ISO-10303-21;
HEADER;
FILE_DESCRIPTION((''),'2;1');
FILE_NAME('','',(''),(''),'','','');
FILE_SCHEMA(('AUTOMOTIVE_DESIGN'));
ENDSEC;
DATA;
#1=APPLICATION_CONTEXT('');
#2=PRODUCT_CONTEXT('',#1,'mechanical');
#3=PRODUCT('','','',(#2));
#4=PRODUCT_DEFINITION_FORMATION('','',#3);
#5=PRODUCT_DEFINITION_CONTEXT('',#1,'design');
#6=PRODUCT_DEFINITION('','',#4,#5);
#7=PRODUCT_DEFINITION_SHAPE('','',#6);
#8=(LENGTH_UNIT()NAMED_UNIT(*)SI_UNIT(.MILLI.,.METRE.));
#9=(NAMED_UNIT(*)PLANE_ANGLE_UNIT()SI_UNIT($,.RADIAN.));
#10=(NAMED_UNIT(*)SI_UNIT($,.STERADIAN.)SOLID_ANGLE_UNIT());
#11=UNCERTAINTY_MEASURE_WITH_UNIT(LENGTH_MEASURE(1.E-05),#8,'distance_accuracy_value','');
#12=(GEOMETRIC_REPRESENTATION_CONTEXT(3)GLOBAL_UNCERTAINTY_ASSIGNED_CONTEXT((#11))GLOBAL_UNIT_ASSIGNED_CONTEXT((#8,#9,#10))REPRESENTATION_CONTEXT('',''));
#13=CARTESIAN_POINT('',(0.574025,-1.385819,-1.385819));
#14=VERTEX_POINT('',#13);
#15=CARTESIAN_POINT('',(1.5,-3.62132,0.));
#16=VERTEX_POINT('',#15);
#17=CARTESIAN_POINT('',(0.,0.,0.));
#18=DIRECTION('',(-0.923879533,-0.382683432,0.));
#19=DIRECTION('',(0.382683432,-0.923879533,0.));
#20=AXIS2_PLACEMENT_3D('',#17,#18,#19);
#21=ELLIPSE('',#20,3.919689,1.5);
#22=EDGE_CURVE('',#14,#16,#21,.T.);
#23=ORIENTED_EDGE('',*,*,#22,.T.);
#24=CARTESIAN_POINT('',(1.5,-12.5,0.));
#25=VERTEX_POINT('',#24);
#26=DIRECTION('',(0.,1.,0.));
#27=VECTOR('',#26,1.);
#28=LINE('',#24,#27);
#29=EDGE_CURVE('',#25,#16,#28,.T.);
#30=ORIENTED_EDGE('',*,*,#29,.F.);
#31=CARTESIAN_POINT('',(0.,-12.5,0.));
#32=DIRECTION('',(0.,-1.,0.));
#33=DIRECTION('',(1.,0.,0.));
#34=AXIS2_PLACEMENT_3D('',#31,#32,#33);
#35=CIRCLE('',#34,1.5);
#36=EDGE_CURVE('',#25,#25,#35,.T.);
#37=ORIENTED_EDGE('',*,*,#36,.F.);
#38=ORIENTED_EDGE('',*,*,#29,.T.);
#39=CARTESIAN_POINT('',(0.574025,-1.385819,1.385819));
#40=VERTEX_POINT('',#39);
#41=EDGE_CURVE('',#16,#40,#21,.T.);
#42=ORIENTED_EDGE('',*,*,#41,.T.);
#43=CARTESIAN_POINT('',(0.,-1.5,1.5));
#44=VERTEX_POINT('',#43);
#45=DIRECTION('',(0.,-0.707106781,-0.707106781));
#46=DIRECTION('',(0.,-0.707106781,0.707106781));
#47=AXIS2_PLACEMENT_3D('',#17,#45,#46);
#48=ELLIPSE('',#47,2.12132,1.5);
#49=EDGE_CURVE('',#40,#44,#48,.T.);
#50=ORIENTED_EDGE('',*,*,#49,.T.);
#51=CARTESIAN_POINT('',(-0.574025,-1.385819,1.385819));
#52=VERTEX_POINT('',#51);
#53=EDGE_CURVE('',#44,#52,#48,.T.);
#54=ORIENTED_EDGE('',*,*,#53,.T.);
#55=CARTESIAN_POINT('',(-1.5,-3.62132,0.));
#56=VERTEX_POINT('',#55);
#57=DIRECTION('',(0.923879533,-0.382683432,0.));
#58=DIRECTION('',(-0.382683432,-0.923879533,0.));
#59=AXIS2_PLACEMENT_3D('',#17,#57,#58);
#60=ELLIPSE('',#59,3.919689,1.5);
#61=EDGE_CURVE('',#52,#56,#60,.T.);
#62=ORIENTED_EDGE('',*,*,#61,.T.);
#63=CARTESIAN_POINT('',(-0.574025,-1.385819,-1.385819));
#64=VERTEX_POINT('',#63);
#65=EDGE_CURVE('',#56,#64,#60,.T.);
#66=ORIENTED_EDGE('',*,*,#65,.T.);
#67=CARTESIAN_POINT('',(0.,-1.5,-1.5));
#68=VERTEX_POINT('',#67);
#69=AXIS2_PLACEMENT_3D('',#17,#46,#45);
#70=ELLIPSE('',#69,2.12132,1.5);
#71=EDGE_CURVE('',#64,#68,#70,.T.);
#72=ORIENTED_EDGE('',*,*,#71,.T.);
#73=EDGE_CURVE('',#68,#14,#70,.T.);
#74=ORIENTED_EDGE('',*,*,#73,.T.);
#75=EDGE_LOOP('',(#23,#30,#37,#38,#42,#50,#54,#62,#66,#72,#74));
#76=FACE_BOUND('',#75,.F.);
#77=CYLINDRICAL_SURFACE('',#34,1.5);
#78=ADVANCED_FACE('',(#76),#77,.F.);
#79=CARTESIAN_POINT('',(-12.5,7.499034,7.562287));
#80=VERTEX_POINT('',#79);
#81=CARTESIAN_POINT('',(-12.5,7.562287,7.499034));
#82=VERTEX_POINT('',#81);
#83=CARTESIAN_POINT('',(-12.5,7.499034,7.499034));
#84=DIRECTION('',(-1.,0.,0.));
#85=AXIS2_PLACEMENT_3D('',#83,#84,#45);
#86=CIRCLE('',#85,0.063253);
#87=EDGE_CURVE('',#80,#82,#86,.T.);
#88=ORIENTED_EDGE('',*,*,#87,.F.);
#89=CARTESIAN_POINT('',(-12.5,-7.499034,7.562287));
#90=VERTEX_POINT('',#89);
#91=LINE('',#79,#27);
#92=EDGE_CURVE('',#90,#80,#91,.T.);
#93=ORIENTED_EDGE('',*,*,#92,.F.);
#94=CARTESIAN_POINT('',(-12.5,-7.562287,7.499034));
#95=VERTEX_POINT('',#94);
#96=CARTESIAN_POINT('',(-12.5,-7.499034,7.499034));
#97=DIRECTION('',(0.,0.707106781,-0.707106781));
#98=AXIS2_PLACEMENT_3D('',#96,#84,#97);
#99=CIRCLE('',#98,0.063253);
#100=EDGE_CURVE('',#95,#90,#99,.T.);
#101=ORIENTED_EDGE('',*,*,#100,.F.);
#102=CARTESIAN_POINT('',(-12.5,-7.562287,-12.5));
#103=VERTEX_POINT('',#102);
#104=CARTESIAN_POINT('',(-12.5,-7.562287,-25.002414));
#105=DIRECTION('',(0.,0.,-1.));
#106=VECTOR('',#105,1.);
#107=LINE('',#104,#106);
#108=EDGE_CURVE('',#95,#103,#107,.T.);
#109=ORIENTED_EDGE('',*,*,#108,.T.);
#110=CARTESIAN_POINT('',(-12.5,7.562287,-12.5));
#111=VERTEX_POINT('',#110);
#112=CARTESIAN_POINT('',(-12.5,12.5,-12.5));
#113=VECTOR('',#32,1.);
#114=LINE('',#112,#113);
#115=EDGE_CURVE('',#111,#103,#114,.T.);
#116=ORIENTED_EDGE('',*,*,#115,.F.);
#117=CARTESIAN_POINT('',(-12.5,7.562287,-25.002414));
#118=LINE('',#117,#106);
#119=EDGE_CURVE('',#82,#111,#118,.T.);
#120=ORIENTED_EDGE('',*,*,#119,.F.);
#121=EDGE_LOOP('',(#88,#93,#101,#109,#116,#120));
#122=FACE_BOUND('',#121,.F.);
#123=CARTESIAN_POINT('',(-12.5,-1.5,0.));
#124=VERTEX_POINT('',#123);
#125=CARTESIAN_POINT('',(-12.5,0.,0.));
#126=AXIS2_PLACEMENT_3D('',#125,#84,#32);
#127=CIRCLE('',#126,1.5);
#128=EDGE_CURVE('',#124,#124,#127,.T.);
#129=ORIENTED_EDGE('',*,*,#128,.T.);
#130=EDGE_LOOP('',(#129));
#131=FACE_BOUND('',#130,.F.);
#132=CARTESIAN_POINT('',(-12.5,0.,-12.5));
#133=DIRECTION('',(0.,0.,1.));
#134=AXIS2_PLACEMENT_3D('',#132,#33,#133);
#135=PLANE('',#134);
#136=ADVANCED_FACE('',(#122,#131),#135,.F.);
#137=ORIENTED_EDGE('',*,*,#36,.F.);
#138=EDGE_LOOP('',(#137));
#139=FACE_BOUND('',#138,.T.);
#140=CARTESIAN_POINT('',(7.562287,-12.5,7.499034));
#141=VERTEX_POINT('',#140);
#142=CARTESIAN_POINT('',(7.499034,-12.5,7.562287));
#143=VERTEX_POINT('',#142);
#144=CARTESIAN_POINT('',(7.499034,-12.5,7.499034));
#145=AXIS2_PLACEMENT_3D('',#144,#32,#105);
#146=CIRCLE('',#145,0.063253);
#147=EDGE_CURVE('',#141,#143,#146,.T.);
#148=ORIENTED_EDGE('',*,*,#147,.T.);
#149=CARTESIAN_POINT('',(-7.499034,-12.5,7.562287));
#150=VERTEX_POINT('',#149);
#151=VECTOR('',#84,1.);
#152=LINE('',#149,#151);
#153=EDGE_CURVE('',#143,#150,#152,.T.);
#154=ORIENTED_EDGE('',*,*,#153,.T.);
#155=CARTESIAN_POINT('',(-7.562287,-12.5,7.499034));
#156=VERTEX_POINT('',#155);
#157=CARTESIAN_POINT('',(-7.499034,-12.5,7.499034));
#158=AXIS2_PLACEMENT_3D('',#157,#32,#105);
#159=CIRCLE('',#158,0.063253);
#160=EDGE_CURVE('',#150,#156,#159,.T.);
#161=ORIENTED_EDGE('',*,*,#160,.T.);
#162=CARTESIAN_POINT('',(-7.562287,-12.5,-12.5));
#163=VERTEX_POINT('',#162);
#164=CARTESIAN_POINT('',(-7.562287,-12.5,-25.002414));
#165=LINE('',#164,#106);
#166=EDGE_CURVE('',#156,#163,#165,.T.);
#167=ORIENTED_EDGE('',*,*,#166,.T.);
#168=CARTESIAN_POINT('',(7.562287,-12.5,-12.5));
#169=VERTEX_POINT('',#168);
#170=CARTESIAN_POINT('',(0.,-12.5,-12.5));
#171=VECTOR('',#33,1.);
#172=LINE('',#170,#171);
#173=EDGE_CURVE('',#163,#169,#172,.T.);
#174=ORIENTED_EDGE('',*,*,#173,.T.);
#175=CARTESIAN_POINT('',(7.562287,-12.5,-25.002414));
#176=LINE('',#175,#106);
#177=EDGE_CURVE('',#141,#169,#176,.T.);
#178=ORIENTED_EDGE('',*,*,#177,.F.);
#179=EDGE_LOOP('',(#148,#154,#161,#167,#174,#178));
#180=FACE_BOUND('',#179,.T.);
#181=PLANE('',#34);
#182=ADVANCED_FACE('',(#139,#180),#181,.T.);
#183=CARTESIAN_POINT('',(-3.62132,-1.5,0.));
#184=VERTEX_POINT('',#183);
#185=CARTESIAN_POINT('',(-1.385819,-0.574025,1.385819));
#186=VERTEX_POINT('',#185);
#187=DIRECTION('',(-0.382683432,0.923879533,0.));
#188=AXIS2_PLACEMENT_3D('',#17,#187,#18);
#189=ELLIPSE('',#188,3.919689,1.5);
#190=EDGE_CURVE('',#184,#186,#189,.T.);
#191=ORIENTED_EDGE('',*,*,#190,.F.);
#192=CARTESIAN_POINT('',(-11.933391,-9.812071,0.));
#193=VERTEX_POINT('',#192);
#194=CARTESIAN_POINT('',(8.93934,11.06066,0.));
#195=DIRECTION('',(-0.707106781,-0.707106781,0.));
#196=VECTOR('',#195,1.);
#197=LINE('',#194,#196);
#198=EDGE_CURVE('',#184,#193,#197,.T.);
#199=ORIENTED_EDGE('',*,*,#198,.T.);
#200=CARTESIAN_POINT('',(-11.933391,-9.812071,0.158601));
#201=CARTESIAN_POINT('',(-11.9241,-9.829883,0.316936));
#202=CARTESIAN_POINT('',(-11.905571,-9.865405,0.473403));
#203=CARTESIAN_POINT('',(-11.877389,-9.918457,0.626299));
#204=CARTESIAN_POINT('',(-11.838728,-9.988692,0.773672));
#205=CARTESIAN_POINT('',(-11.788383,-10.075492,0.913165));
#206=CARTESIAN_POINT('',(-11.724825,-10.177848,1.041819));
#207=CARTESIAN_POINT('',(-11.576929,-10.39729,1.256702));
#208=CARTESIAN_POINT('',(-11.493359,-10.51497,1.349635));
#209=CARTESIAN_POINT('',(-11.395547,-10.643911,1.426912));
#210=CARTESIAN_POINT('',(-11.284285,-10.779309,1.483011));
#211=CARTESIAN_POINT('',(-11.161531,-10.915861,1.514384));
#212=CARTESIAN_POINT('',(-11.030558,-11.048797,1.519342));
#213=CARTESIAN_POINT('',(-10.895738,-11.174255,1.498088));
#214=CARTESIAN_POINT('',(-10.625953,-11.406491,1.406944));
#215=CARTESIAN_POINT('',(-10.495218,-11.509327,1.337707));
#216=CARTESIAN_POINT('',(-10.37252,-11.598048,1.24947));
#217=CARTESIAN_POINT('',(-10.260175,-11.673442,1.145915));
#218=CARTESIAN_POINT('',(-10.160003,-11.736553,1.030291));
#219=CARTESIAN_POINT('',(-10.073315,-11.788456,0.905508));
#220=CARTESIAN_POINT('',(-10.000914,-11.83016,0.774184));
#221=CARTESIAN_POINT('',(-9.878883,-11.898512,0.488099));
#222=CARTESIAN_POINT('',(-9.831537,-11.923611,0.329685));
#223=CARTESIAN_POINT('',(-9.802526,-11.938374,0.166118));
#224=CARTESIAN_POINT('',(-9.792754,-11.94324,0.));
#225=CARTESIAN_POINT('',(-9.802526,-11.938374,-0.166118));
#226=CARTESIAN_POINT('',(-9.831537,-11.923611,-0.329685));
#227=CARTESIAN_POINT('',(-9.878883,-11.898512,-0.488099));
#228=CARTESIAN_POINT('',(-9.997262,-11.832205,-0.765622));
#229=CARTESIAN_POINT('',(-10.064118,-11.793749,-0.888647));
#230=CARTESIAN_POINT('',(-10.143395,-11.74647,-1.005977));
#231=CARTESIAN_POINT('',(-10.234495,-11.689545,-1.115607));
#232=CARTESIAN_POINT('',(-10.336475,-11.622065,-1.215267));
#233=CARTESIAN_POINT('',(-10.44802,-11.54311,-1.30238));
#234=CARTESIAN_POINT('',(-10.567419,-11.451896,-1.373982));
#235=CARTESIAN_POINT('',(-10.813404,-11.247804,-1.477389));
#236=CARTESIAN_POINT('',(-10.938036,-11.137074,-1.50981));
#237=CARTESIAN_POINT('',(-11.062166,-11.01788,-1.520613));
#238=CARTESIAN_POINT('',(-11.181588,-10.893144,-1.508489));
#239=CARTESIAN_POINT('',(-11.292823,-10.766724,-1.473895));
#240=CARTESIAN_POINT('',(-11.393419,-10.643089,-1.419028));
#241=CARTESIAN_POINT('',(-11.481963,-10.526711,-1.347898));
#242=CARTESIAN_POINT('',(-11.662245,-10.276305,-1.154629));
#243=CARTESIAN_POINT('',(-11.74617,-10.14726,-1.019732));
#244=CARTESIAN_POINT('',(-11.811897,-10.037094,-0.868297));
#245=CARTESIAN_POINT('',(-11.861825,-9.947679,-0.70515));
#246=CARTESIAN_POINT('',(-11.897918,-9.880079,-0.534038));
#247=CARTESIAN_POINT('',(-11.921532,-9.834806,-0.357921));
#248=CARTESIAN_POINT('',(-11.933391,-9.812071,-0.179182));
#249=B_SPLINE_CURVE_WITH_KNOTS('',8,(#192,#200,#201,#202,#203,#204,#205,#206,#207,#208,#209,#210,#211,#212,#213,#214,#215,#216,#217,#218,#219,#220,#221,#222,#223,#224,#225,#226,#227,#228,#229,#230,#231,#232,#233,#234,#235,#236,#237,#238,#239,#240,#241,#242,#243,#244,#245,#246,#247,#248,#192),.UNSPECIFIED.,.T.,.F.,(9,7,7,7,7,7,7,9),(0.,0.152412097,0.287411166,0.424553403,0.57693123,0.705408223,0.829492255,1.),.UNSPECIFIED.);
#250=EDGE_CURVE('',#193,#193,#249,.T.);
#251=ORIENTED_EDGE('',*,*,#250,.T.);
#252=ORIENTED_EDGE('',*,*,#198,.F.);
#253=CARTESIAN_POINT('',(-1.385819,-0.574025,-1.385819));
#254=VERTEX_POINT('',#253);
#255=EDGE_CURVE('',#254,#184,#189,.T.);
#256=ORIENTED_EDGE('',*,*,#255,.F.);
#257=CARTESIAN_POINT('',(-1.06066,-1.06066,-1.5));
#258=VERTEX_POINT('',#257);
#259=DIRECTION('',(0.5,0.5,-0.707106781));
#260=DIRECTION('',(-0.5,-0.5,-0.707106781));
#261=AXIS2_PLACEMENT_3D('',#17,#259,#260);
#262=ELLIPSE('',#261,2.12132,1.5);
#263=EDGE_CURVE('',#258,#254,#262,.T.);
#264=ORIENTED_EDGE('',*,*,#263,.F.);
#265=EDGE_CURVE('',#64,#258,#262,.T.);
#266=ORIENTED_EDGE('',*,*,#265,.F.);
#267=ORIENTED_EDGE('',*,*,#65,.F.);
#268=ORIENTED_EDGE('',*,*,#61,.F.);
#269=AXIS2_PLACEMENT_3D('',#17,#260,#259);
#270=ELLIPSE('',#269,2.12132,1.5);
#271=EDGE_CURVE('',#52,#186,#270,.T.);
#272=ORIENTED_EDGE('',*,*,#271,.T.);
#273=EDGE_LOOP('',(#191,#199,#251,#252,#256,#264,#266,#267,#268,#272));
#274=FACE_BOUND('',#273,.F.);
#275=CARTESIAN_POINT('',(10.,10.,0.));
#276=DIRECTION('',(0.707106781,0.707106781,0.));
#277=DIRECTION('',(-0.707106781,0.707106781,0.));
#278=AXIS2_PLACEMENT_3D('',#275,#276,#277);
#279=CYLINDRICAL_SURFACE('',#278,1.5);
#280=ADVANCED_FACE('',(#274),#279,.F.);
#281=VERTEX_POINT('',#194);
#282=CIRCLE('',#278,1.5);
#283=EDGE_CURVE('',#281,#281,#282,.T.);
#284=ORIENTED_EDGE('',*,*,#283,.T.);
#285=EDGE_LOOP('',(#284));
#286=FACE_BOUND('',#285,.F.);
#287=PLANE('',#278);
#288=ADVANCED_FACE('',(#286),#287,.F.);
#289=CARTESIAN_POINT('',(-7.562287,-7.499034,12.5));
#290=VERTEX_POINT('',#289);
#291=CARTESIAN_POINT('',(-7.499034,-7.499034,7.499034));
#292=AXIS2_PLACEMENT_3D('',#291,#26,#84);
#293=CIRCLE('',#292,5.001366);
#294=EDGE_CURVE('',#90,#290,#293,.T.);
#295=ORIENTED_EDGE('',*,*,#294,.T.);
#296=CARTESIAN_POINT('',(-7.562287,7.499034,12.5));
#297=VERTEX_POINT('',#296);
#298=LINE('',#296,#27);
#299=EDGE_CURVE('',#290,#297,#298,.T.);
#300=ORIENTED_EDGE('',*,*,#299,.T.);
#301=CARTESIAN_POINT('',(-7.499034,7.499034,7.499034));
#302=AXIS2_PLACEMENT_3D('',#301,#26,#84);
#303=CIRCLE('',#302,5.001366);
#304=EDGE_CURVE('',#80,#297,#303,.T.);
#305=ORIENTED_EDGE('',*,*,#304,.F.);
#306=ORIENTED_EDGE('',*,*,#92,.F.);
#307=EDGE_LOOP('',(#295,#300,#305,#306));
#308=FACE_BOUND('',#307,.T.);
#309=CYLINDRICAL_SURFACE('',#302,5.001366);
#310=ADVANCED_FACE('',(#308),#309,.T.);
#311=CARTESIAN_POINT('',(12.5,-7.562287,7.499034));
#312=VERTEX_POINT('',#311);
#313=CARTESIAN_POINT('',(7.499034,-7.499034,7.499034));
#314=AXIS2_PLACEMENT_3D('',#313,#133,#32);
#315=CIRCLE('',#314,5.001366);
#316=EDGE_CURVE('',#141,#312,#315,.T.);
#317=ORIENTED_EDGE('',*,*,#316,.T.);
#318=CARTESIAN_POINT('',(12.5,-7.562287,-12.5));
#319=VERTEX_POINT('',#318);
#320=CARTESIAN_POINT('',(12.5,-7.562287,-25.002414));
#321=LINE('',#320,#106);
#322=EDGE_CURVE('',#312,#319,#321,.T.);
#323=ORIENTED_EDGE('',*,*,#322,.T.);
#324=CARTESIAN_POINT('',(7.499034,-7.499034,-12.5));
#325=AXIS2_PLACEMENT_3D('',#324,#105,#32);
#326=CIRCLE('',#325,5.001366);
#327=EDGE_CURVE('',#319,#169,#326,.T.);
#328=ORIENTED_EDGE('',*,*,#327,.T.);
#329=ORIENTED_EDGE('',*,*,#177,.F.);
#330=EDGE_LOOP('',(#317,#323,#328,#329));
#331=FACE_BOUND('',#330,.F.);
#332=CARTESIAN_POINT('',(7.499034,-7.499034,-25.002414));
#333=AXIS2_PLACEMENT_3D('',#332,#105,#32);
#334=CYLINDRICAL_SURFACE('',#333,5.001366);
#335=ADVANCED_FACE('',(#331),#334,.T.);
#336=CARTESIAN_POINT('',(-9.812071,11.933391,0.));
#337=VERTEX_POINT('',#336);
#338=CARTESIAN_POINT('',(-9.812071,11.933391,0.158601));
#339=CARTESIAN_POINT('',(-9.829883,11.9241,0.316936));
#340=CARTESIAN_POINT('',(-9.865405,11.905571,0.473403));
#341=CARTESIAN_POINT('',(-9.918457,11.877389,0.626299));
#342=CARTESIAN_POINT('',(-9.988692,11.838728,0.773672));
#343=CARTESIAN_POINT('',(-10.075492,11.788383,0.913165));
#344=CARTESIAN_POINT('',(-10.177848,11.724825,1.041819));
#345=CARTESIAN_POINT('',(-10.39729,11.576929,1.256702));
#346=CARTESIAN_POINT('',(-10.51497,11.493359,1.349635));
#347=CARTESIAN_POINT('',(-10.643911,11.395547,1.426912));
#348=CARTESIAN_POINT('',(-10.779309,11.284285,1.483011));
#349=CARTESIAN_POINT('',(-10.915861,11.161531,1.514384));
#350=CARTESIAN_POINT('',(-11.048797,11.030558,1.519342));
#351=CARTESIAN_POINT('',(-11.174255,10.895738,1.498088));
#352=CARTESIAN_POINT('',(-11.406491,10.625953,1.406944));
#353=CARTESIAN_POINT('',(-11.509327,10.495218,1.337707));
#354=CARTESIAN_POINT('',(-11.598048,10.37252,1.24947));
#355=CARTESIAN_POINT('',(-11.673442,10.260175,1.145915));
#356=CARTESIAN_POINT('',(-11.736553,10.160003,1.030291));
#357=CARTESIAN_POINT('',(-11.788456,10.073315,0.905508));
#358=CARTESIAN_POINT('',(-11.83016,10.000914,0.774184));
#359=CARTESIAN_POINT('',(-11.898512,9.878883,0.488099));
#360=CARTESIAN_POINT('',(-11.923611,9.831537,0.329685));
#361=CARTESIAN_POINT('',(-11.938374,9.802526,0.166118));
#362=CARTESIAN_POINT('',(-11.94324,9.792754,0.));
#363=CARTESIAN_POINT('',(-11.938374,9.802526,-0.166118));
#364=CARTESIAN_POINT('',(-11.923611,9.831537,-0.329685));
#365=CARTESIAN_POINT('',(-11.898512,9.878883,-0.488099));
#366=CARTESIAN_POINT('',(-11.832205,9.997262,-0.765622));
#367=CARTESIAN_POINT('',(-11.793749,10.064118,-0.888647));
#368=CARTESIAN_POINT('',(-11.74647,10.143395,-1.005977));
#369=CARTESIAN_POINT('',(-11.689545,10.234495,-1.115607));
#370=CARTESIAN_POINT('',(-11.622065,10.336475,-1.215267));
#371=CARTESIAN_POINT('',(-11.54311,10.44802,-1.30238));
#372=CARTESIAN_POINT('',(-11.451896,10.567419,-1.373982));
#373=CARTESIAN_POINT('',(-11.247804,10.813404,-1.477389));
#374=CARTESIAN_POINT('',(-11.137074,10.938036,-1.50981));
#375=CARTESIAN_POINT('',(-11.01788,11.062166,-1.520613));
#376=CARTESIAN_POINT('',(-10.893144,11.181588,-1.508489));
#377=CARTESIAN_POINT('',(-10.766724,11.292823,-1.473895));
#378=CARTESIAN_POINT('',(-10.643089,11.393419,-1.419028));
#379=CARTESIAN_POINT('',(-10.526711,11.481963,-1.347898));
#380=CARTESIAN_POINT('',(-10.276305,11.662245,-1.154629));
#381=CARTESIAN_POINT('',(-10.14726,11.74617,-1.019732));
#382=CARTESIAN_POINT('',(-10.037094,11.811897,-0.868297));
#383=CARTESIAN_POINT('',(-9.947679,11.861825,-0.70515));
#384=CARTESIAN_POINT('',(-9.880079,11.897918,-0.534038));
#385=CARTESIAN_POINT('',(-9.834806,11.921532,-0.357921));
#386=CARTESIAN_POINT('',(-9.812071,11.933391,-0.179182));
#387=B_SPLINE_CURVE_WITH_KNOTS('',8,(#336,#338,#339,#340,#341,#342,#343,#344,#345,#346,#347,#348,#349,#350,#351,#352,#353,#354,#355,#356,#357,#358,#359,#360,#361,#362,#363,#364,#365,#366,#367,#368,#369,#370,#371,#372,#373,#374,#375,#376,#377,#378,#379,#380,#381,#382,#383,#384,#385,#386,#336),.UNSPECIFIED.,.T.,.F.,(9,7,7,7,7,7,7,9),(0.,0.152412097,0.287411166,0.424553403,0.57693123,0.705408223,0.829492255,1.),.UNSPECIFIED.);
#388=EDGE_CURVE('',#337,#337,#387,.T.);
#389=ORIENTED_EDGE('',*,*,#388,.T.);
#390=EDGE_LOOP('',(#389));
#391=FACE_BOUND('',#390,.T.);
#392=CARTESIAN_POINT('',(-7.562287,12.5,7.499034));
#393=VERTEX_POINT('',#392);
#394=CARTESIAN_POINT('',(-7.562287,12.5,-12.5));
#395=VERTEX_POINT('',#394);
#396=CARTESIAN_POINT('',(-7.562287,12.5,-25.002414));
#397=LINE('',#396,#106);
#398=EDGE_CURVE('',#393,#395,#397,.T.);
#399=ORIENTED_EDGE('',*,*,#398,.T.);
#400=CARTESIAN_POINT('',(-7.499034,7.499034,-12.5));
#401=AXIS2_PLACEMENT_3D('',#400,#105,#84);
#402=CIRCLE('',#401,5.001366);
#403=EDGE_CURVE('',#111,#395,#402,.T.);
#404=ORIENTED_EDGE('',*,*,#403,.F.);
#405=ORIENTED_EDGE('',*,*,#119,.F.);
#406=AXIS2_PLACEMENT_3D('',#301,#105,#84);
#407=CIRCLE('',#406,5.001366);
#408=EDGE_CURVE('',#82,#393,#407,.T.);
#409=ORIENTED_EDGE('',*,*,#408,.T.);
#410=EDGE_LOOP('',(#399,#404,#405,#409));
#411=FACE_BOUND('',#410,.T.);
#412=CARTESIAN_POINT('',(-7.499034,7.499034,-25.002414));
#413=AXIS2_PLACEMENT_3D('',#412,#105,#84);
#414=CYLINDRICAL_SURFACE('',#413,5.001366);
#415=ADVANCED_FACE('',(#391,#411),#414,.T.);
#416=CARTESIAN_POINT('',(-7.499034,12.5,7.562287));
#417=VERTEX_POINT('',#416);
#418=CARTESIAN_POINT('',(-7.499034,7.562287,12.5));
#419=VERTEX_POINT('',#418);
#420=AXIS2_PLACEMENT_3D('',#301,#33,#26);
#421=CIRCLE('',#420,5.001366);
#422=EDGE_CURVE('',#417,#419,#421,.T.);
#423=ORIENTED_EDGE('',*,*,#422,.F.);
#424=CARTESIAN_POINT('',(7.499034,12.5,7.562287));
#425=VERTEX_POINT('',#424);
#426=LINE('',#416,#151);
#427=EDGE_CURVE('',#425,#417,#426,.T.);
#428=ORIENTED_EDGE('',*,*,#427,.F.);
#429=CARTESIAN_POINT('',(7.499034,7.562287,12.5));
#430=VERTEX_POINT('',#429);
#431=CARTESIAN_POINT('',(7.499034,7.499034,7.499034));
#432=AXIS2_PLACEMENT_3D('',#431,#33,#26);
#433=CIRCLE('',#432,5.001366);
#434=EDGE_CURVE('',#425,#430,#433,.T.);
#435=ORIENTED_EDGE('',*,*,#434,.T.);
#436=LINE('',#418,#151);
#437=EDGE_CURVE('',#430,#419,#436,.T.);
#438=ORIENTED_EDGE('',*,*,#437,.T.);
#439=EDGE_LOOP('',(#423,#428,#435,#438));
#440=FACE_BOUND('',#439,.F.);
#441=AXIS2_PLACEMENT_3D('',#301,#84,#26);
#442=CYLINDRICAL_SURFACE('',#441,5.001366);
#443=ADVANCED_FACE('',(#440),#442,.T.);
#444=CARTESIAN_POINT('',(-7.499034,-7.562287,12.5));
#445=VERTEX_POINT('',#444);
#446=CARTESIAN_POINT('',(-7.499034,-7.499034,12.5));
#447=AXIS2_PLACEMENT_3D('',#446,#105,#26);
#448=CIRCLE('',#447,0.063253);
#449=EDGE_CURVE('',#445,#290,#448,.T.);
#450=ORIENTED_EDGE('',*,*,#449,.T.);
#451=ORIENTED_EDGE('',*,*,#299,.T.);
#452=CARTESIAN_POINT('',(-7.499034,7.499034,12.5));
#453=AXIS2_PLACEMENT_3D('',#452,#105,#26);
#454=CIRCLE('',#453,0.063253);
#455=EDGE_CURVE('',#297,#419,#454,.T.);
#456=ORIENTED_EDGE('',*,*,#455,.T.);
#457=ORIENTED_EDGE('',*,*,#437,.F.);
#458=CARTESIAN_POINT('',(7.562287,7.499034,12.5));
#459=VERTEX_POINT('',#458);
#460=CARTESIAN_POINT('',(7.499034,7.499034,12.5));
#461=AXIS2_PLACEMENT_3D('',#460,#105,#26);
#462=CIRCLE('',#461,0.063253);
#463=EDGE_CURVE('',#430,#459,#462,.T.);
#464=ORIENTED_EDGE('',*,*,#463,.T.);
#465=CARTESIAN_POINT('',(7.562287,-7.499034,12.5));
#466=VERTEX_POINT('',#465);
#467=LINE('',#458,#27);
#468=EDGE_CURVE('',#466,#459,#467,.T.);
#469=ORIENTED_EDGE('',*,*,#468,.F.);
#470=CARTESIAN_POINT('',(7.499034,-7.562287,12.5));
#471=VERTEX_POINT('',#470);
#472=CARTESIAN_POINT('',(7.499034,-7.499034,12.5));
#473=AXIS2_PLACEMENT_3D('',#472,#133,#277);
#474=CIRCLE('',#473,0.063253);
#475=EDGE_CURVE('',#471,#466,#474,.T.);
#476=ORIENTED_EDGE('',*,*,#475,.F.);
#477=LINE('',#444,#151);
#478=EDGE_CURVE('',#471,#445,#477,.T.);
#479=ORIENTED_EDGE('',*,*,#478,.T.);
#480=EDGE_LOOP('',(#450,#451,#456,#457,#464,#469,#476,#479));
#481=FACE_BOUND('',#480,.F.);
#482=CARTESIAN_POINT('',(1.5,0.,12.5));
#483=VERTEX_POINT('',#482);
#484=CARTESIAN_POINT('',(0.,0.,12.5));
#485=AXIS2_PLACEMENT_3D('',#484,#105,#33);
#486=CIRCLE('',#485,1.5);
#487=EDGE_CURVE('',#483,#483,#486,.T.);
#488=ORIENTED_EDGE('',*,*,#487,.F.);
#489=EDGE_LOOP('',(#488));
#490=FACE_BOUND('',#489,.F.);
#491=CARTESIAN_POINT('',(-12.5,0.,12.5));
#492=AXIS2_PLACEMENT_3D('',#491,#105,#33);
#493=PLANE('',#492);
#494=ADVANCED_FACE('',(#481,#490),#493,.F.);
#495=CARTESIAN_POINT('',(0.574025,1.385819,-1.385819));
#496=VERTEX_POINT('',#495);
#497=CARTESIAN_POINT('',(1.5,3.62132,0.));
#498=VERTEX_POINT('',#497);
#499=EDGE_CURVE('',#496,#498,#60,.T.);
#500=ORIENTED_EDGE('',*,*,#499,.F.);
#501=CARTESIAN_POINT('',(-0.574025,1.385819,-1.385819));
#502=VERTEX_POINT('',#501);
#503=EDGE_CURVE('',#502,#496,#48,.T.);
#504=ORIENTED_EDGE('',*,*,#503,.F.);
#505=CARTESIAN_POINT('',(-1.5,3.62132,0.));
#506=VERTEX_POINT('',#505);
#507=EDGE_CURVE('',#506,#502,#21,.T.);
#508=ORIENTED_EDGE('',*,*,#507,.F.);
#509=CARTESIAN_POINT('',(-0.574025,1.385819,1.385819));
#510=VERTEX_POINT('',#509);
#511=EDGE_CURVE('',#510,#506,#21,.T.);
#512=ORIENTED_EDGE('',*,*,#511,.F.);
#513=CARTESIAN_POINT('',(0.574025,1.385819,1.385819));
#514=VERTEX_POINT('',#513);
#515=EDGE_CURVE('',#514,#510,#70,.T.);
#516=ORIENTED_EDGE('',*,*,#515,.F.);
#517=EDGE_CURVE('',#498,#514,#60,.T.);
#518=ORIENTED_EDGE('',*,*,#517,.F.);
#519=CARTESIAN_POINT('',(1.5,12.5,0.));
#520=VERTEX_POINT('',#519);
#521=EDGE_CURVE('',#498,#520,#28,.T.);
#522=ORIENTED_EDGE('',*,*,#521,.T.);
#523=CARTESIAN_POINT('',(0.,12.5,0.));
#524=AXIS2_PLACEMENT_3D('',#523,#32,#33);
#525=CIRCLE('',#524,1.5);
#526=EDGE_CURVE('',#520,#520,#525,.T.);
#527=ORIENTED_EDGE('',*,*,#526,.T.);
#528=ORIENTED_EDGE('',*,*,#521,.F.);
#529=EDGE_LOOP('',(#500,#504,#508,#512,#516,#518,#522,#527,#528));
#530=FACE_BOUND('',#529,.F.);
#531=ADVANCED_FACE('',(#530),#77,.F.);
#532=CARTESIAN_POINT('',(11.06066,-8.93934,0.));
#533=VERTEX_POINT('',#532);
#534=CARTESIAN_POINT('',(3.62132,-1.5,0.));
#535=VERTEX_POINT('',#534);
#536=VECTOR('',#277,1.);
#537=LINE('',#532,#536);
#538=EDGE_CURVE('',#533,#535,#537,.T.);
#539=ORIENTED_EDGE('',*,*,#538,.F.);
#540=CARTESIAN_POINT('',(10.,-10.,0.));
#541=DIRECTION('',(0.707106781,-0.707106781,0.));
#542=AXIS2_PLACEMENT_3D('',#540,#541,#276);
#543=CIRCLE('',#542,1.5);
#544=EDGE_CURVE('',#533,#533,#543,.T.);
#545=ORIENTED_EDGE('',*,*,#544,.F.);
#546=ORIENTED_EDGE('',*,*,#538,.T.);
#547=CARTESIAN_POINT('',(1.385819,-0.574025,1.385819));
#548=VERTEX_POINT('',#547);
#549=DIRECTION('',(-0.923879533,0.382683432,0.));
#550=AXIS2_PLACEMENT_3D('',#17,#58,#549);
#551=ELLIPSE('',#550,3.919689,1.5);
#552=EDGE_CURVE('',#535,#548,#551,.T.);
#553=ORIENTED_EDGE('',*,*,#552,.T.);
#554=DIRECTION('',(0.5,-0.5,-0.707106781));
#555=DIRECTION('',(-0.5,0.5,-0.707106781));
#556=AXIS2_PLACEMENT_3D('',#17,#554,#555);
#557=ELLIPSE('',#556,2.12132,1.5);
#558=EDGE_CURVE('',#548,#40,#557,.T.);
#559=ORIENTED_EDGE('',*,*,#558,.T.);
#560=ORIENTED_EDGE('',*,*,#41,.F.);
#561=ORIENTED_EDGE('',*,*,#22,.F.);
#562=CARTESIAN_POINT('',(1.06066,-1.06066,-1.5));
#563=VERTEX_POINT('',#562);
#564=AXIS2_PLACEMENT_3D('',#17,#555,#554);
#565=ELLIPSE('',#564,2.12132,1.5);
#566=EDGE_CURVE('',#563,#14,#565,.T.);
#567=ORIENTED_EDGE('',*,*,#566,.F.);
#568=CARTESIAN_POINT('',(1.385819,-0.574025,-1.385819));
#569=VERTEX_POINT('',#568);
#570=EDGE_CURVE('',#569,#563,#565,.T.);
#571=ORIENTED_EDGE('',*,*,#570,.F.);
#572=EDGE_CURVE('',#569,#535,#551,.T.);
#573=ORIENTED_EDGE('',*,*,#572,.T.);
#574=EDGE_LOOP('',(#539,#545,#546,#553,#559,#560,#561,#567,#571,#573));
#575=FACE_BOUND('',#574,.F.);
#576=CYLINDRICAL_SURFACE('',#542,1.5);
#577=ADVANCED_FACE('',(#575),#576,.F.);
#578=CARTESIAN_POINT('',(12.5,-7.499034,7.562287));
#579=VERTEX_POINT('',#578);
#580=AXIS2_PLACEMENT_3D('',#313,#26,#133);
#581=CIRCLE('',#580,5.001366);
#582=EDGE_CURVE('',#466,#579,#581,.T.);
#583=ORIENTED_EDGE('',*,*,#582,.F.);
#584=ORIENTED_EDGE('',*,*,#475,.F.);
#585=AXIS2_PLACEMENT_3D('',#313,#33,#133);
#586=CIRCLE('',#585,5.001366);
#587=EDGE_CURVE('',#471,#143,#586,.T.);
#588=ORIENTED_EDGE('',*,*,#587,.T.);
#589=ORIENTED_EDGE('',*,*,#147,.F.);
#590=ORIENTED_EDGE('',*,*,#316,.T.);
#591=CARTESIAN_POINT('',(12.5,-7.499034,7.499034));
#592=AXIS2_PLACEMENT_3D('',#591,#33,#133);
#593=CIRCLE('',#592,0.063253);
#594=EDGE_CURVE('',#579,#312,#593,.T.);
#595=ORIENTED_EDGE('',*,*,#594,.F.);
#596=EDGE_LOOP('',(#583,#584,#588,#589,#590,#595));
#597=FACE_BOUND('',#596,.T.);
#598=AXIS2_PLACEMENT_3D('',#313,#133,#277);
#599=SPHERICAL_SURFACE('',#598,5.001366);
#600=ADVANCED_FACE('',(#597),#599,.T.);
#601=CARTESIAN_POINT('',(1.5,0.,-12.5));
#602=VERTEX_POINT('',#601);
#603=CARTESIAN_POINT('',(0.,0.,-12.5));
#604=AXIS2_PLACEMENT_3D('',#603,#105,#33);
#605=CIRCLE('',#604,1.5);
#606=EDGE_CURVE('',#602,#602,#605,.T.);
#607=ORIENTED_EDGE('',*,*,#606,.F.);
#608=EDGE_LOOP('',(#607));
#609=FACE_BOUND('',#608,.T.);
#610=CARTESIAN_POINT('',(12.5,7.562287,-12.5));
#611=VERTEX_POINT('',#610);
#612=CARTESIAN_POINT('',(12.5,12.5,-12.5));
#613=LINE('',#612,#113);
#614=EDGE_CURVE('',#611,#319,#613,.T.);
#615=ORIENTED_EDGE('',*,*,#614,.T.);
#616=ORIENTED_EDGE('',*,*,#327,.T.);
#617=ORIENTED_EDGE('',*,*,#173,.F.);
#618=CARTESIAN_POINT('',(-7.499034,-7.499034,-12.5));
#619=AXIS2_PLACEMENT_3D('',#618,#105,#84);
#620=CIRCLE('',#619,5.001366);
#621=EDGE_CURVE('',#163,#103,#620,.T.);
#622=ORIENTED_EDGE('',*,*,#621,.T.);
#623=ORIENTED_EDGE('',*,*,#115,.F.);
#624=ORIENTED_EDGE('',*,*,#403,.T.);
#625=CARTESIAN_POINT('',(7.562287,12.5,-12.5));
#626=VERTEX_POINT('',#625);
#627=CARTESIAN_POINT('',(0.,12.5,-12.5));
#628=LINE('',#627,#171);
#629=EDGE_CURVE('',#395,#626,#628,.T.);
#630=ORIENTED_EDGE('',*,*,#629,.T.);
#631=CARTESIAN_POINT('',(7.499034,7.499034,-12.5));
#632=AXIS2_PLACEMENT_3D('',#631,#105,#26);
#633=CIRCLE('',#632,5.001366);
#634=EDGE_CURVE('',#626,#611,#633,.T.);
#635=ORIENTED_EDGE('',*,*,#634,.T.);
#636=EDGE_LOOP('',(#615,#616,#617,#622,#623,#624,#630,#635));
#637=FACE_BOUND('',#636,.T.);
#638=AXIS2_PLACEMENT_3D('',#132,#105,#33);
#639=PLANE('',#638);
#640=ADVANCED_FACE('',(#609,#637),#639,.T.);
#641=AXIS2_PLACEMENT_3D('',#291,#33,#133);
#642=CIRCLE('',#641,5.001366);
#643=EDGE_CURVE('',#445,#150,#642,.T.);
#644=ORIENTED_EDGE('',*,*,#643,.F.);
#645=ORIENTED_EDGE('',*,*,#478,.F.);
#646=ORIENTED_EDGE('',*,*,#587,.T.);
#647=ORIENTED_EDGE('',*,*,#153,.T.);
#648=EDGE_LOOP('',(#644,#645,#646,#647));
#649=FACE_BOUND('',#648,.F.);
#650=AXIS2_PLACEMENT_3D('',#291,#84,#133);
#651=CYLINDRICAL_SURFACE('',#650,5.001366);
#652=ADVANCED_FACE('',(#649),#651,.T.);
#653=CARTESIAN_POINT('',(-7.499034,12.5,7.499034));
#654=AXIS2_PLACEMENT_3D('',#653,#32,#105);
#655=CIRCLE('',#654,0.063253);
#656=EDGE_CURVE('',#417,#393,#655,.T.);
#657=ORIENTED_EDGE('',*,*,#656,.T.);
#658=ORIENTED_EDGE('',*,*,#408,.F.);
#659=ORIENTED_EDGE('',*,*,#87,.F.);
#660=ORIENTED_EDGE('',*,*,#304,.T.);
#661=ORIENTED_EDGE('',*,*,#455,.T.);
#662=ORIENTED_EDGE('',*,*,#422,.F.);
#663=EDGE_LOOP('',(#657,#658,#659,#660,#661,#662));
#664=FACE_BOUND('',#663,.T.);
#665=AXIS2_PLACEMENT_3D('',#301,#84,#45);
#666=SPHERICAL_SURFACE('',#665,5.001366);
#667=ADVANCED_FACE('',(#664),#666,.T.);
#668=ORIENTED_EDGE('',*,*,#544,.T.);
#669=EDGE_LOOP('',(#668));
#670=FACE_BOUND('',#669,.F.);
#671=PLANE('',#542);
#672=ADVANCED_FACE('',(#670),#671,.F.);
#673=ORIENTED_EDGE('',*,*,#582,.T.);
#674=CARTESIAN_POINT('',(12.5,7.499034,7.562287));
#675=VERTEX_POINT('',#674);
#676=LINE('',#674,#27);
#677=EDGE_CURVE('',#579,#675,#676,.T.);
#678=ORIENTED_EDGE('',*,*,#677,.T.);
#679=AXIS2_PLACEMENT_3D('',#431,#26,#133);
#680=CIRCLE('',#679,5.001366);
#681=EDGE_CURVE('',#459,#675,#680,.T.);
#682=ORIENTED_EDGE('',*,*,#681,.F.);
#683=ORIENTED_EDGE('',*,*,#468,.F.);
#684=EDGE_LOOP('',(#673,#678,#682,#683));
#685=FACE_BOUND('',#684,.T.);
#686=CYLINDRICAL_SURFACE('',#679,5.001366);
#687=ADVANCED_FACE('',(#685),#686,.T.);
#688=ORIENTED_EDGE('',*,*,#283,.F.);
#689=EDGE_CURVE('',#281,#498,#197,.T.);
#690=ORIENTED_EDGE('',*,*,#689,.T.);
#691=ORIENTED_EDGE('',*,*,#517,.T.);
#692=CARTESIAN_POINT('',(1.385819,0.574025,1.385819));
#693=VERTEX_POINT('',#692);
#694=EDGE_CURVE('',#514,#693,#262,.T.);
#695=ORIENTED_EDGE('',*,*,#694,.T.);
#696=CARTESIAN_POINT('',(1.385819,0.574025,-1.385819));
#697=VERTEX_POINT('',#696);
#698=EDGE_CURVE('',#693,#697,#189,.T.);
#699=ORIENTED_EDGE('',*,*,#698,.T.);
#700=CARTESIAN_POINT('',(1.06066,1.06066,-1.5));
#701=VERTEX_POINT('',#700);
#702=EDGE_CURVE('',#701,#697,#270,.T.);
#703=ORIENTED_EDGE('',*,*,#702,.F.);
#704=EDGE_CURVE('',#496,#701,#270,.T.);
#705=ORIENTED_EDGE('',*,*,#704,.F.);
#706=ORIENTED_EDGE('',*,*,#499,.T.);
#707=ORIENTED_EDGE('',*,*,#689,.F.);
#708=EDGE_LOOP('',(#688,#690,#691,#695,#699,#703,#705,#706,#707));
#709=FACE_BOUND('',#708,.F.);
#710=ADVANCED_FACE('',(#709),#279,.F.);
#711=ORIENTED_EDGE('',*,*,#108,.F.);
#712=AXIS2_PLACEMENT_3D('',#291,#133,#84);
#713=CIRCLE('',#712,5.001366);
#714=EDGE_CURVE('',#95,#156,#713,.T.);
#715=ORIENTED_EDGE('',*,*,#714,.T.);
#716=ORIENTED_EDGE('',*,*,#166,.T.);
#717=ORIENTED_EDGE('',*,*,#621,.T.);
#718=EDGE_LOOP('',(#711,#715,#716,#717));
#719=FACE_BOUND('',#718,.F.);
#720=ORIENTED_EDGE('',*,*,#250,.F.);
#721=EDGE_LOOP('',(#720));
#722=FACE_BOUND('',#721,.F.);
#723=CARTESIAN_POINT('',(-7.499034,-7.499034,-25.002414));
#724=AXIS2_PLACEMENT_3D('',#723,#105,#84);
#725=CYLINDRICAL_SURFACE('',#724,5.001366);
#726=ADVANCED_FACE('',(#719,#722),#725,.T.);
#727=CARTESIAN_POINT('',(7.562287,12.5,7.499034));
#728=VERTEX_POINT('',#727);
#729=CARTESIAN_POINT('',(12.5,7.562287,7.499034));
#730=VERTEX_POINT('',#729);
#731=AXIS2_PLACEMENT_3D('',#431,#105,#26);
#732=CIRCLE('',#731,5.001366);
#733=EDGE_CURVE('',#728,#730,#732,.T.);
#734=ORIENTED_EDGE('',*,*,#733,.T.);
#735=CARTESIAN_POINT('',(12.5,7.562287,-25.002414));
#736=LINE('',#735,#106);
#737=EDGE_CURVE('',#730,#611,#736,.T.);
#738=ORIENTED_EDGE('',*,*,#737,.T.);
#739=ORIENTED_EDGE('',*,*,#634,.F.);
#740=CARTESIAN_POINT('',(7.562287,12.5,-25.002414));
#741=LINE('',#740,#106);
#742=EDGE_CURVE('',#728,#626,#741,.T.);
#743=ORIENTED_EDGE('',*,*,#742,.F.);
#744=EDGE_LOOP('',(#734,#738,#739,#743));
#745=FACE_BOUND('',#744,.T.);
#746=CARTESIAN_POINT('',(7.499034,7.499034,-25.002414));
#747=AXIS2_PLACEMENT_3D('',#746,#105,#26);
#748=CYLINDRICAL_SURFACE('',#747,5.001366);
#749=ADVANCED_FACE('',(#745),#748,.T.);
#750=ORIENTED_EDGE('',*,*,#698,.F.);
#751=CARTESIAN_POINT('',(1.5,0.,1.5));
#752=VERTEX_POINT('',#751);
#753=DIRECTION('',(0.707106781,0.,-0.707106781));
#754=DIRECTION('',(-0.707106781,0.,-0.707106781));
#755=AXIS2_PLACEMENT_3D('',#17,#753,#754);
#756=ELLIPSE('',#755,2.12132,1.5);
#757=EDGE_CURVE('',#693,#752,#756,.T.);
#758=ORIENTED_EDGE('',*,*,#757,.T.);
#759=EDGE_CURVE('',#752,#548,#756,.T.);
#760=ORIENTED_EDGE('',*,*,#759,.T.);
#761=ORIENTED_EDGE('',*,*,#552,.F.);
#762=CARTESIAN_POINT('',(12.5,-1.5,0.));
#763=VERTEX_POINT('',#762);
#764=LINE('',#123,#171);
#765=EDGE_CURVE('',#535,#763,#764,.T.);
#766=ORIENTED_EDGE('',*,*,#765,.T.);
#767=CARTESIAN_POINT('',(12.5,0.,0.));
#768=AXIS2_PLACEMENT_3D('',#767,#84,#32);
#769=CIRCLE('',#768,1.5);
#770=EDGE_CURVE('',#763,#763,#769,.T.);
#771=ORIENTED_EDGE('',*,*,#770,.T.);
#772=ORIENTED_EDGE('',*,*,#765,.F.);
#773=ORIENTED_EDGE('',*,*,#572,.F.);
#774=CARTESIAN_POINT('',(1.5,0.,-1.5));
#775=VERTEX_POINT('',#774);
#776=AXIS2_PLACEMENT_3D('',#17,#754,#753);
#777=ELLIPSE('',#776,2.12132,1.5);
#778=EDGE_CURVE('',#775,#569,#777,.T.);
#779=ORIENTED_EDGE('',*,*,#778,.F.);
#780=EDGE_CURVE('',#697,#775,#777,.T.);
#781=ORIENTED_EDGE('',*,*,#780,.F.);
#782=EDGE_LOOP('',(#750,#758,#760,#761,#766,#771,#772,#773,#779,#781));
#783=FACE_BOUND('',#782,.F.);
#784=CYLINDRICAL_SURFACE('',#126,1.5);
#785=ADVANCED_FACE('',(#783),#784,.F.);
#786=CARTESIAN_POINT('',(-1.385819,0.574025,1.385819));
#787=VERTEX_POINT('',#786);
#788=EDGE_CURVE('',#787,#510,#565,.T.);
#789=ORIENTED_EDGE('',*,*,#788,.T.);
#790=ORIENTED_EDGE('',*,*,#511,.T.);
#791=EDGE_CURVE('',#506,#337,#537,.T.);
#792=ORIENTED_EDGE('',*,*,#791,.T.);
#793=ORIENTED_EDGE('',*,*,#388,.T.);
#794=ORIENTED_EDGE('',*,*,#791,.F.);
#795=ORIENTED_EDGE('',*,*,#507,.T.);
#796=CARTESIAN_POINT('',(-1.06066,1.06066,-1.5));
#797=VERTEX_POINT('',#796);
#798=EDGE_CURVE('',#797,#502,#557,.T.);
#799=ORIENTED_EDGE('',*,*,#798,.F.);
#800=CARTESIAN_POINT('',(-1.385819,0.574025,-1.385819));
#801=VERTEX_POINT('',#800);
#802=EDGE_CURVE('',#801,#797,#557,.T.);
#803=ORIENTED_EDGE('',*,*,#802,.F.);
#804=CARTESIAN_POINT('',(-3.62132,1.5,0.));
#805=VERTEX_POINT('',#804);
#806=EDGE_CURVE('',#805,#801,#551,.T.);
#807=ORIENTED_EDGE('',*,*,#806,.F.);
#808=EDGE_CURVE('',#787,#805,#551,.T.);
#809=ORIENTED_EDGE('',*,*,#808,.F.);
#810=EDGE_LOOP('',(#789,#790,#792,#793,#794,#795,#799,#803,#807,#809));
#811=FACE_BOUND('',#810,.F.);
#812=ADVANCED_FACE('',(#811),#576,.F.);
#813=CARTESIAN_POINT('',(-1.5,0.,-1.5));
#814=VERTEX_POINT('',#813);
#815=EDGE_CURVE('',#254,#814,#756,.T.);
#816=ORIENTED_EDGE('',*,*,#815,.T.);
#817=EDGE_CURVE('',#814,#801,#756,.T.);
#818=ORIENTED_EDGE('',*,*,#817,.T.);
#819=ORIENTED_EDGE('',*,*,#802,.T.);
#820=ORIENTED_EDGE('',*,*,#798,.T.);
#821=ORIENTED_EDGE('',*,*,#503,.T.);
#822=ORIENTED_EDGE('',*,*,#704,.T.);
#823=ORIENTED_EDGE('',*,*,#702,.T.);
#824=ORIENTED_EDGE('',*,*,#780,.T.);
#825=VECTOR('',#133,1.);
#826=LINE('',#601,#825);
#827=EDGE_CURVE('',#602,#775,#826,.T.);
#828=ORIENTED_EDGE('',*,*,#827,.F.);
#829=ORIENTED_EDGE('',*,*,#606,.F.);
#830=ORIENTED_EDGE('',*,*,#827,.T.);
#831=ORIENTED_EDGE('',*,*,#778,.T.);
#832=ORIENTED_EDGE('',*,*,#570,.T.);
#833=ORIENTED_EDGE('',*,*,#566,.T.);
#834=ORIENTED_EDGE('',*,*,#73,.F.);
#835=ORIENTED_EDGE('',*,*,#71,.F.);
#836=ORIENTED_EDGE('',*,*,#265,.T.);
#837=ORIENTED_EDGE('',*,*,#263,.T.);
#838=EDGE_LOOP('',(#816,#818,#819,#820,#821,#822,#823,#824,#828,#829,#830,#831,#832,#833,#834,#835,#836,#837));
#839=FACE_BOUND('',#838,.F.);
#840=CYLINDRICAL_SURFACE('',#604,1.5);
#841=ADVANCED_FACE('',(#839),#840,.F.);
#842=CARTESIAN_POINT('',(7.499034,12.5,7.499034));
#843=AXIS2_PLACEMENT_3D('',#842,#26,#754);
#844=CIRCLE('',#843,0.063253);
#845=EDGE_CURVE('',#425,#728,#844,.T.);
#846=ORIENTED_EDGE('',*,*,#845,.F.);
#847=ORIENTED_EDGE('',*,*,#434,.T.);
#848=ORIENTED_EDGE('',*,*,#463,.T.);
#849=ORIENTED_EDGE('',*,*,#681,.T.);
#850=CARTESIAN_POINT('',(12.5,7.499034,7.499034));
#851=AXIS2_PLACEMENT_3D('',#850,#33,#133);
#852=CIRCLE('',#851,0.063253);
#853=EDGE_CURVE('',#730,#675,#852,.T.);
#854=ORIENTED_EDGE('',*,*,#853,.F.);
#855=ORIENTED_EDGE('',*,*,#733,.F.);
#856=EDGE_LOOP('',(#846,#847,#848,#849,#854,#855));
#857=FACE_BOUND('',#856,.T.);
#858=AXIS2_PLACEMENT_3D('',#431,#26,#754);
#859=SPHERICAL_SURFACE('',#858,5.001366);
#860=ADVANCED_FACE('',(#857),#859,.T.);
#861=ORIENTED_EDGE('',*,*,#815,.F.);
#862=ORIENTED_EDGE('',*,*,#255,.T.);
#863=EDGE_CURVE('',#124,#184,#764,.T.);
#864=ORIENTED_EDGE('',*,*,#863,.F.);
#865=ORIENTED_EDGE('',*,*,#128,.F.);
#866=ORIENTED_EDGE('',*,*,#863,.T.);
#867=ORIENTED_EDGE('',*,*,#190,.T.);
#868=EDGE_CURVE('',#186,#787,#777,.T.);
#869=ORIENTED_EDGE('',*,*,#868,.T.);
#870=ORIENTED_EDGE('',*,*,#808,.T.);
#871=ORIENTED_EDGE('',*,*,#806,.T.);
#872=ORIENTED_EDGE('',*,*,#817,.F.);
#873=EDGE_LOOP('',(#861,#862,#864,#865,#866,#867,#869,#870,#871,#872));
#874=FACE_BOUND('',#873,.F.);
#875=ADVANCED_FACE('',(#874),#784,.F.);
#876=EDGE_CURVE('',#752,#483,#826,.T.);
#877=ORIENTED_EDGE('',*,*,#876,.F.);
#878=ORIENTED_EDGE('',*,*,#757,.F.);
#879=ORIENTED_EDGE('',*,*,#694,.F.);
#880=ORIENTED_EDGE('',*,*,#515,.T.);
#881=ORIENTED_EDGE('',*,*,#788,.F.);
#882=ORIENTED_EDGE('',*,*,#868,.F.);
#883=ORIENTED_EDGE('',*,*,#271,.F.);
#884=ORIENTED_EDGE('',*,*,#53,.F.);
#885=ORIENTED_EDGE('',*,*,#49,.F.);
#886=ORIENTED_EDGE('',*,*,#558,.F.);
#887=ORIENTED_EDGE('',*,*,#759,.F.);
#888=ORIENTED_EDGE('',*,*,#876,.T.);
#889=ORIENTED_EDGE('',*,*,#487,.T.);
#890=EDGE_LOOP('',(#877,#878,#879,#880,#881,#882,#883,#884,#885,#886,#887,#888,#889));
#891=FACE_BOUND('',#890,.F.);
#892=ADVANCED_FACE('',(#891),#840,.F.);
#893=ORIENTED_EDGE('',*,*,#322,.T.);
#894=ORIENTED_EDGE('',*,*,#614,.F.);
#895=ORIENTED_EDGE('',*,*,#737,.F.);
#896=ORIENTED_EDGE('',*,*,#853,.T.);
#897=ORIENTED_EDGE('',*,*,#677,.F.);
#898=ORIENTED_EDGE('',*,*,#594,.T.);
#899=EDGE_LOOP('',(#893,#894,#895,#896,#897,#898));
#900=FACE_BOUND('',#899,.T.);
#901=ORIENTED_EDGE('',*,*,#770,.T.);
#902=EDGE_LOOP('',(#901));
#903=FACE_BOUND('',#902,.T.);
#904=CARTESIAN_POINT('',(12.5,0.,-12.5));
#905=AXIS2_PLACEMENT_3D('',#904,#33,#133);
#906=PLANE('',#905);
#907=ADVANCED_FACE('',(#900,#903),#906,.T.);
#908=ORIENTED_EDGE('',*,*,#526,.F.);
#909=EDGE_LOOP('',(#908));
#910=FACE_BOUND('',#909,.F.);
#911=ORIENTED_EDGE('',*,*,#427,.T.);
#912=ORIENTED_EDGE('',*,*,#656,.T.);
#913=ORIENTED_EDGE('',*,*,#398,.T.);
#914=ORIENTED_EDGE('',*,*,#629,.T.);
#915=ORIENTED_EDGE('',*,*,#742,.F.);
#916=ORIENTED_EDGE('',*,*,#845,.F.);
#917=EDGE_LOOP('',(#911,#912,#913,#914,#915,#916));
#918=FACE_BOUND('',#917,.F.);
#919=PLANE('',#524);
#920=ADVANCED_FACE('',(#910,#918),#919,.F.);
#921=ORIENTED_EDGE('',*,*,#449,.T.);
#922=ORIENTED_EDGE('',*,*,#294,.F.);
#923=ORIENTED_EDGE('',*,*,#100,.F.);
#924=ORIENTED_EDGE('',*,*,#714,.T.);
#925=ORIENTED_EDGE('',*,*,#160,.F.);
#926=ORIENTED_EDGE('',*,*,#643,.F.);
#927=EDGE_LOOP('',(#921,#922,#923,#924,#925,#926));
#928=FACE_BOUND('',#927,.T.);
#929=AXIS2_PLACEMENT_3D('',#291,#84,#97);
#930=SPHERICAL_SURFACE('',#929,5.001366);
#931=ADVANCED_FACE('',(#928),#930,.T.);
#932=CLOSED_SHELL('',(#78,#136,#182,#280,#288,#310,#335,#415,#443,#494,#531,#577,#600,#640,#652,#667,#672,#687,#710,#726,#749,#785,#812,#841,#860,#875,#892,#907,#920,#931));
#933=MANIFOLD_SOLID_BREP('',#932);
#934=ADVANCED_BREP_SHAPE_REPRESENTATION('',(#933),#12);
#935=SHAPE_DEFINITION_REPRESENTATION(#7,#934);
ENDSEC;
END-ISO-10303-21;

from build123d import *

# Parameters (mm, degrees)
F0_W         = 25
F0_H         = 25
F1_DEPTH     = 12.5
F2_R         = 1.5
F3_DEPTH     = 25
F4_R         = 1.5
F5_DEPTH     = 25.001
F6_R         = 1.5
F7_DEPTH     = 25.001
F8_T1_DEPTH  = 32.5014485681
F8_T3_DEPTH  = 14.9980686292
F8_T5_DEPTH  = 14.9980686292
F8_S9_W      = 5.5015022539
F8_S9_H      = 5.5015022539
F8_T10_DEPTH = 5.501502254
F8_S15_W     = 5.5015022539
F8_S15_H     = 5.5015022539
F8_T16_DEPTH = 5.501502254
F8_S21_W     = 5.5015022539
F8_S21_H     = 5.5015022539
F8_T22_DEPTH = 5.501502254
F8_S27_W     = 5.5015022539
F8_S27_H     = 5.5015022539
F8_T28_DEPTH = 5.501502254
F10_R        = 1.5
F11_DEPTH    = 31.8208051534
F13_R        = 1.5
F14_DEPTH    = 31.8208052241


# Not quite as in the source:
# - a fillet or chamfer that OpenCascade refuses, or shapes differently, is made with other operations: its cross-section is extruded or revolved along the edge and cut away or added


with BuildPart() as f1:
    # F0 (on Front) → F1 (new body, symmetric)
    with BuildSketch(Plane.XZ):
        Rectangle(F0_W, F0_H)
    extrude(amount=F1_DEPTH, both=True)

    # F2 (on face) → F3 (cut, through all)
    with BuildSketch(Plane.XZ.offset(12.5)):
        Circle(F2_R)
    extrude(amount=-F3_DEPTH, mode=Mode.SUBTRACT)

    # F4 (on face) → F5 (cut, through all)
    with BuildSketch(Plane(origin=(0, 0, -12.5), x_dir=(1, 0, 0), z_dir=(0, 0, -1))):
        Circle(F4_R)
    extrude(amount=-F5_DEPTH, mode=Mode.SUBTRACT)

    # F6 (on face) → F7 (cut, through all)
    with BuildSketch(Plane(origin=(-12.5, 0, 0), x_dir=(0, -1, 0), z_dir=(-1, 0, 0))):
        Circle(F6_R)
    extrude(amount=-F7_DEPTH, mode=Mode.SUBTRACT)

    # F8: fillet of radius 5 on 8 edges, made by hand

    # F8_s2 → F8_t1 (cut)
    with BuildSketch(Plane.XY.offset(-25.0024142536)):
        with BuildLine():
            ThreePointArc((7.4990343146, -12.5004), (11.0355339059, -11.0355339059), (12.5004, -7.4990343146))
            Line((12.5004, -7.4990343146), (13.0005365685, -7.4990343146))
            ThreePointArc((13.0005365685, -7.4990343146), (13.0001365685, -9.9995171573), (13.0001365685, -12.5))
            Line((13.0001365685, -12.5), (12.5, -13.0001365685))
            ThreePointArc((12.5, -13.0001365685), (9.9995171573, -13.0001365685), (7.4990343146, -13.0005365685))
            Line((7.4990343146, -13.0005365685), (7.4990343146, -12.5004))
        make_face()
        with BuildLine():
            ThreePointArc((-12.5004, 7.4990343146), (-11.0355339059, 11.0355339059), (-7.4990343146, 12.5004))
            Line((-7.4990343146, 12.5004), (-7.4990343146, 13.0005365685))
            ThreePointArc((-7.4990343146, 13.0005365685), (-9.9995171573, 13.0001365685), (-12.5, 13.0001365685))
            Line((-12.5, 13.0001365685), (-13.0001365685, 12.5))
            ThreePointArc((-13.0001365685, 12.5), (-13.0001365685, 9.9995171573), (-13.0005365685, 7.4990343146))
            Line((-13.0005365685, 7.4990343146), (-12.5004, 7.4990343146))
        make_face()
        with BuildLine():
            ThreePointArc((-12.5004, -7.4990343146), (-11.0355339059, -11.0355339059), (-7.4990343146, -12.5004))
            Line((-7.4990343146, -12.5004), (-7.4990343146, -13.0005365685))
            ThreePointArc((-7.4990343146, -13.0005365685), (-9.9995171573, -13.0001365685), (-12.5, -13.0001365685))
            Line((-12.5, -13.0001365685), (-13.0001365685, -12.5))
            ThreePointArc((-13.0001365685, -12.5), (-13.0001365685, -9.9995171573), (-13.0005365685, -7.4990343146))
            Line((-13.0005365685, -7.4990343146), (-12.5004, -7.4990343146))
        make_face()
        with BuildLine():
            ThreePointArc((7.4990343146, 12.5004), (11.0355339059, 11.0355339059), (12.5004, 7.4990343146))
            Line((12.5004, 7.4990343146), (13.0005365685, 7.4990343146))
            ThreePointArc((13.0005365685, 7.4990343146), (13.0001365685, 9.9995171573), (13.0001365685, 12.5))
            Line((13.0001365685, 12.5), (12.5, 13.0001365685))
            ThreePointArc((12.5, 13.0001365685), (9.9995171573, 13.0001365685), (7.4990343146, 13.0005365685))
            Line((7.4990343146, 13.0005365685), (7.4990343146, 12.5004))
        make_face()
    extrude(amount=F8_T1_DEPTH, mode=Mode.SUBTRACT)

    # F8_s4 → F8_t3 (cut)
    with BuildSketch(Plane.XZ.offset(-7.4990343146)):
        with BuildLine():
            ThreePointArc((7.4990343146, 12.5004), (11.0355339059, 11.0355339059), (12.5004, 7.4990343146))
            Line((12.5004, 7.4990343146), (13.0005365685, 7.4990343146))
            ThreePointArc((13.0005365685, 7.4990343146), (13.0001365685, 9.9995171573), (13.0001365685, 12.5))
            Line((13.0001365685, 12.5), (12.5, 13.0001365685))
            ThreePointArc((12.5, 13.0001365685), (9.9995171573, 13.0001365685), (7.4990343146, 13.0005365685))
            Line((7.4990343146, 13.0005365685), (7.4990343146, 12.5004))
        make_face()
        with BuildLine():
            ThreePointArc((-12.5004, 7.4990343146), (-11.0355339059, 11.0355339059), (-7.4990343146, 12.5004))
            Line((-7.4990343146, 12.5004), (-7.4990343146, 13.0005365685))
            ThreePointArc((-7.4990343146, 13.0005365685), (-9.9995171573, 13.0001365685), (-12.5, 13.0001365685))
            Line((-12.5, 13.0001365685), (-13.0001365685, 12.5))
            ThreePointArc((-13.0001365685, 12.5), (-13.0001365685, 9.9995171573), (-13.0005365685, 7.4990343146))
            Line((-13.0005365685, 7.4990343146), (-12.5004, 7.4990343146))
        make_face()
    extrude(amount=F8_T3_DEPTH, mode=Mode.SUBTRACT)

    # F8_s6 → F8_t5 (cut)
    with BuildSketch(Plane.YZ.offset(-7.4990343146)):
        with BuildLine():
            ThreePointArc((12.5004, 7.4990343146), (11.0355339059, 11.0355339059), (7.4990343146, 12.5004))
            Line((7.4990343146, 12.5004), (7.4990343146, 13.0005365685))
            ThreePointArc((7.4990343146, 13.0005365685), (9.9995171573, 13.0001365685), (12.5, 13.0001365685))
            Line((12.5, 13.0001365685), (13.0001365685, 12.5))
            ThreePointArc((13.0001365685, 12.5), (13.0001365685, 9.9995171573), (13.0005365685, 7.4990343146))
            Line((13.0005365685, 7.4990343146), (12.5004, 7.4990343146))
        make_face()
        with BuildLine():
            ThreePointArc((-7.4990343146, 12.5004), (-11.0355339059, 11.0355339059), (-12.5004, 7.4990343146))
            Line((-12.5004, 7.4990343146), (-13.0005365685, 7.4990343146))
            ThreePointArc((-13.0005365685, 7.4990343146), (-13.0001365685, 9.9995171573), (-13.0001365685, 12.5))
            Line((-13.0001365685, 12.5), (-12.5, 13.0001365685))
            ThreePointArc((-12.5, 13.0001365685), (-9.9995171573, 13.0001365685), (-7.4990343146, 13.0005365685))
            Line((-7.4990343146, 13.0005365685), (-7.4990343146, 12.5004))
        make_face()
    extrude(amount=F8_T5_DEPTH, mode=Mode.SUBTRACT)


with BuildPart() as f8_tool8:
    # F8_s9 → F8_t10 (new body)
    with BuildSketch(Plane.XY.offset(7.4990343146)):
        with Locations((10.2497854415, -10.2497854415)):
            Rectangle(F8_S9_W, F8_S9_H)
    extrude(amount=F8_T10_DEPTH)

    # F8_s11 → F8_t12 (revolve, cut)
    with BuildSketch(Plane(origin=(7.4990343146, -7.4990343146, 7.4990343146), x_dir=(-0.7071067812, 0.7071067812, 0), z_dir=(0.7071067812, 0.7071067812, 0))):
        with BuildLine():
            ThreePointArc((0, -5.0013656854), (5.0013656854, 0), (0, 5.0013656854))
            Line((0, 5.0013656854), (0, -5.0013656854))
        make_face()
    revolve(axis=Axis((7.4990343146, -7.4990343146, 7.4990343146), (0, 0, 1)), mode=Mode.SUBTRACT)


with BuildPart() as f1_1:
    add(f1.part)

    # F8_t7: cut F8_tool8
    add(f8_tool8.part, mode=Mode.SUBTRACT)


with BuildPart() as f8_tool14:
    # F8_s15 → F8_t16 (new body)
    with BuildSketch(Plane.XZ.offset(-7.4990343146)):
        with Locations((10.2497854415, 10.2497854415)):
            Rectangle(F8_S15_W, F8_S15_H)
    extrude(amount=-F8_T16_DEPTH)

    # F8_s17 → F8_t18 (revolve, cut)
    with BuildSketch(Plane(origin=(7.4990343146, 7.4990343146, 7.4990343146), x_dir=(-0.7071067812, 0, -0.7071067812), z_dir=(0.7071067812, 0, -0.7071067812))):
        with BuildLine():
            ThreePointArc((0, -5.0013656854), (5.0013656854, 0), (0, 5.0013656854))
            Line((0, 5.0013656854), (0, -5.0013656854))
        make_face()
    revolve(axis=Axis((7.4990343146, 7.4990343146, 7.4990343146), (0, 1, 0)), mode=Mode.SUBTRACT)


with BuildPart() as f1_2:
    add(f1_1.part)

    # F8_t13: cut F8_tool14
    add(f8_tool14.part, mode=Mode.SUBTRACT)


with BuildPart() as f8_tool20:
    # F8_s21 → F8_t22 (new body)
    with BuildSketch(Plane.YZ.offset(-7.4990343146)):
        with Locations((10.2497854415, 10.2497854415)):
            Rectangle(F8_S21_W, F8_S21_H)
    extrude(amount=-F8_T22_DEPTH)

    # F8_s23 → F8_t24 (revolve, cut)
    with BuildSketch(Plane(origin=(-7.4990343146, 7.4990343146, 7.4990343146), x_dir=(0, -0.7071067812, -0.7071067812), z_dir=(0, 0.7071067812, -0.7071067812))):
        with BuildLine():
            ThreePointArc((0, -5.0013656854), (5.0013656854, 0), (0, 5.0013656854))
            Line((0, 5.0013656854), (0, -5.0013656854))
        make_face()
    revolve(axis=Axis((-7.4990343146, 7.4990343146, 7.4990343146), (-1, 0, 0)), mode=Mode.SUBTRACT)


with BuildPart() as f1_3:
    add(f1_2.part)

    # F8_t19: cut F8_tool20
    add(f8_tool20.part, mode=Mode.SUBTRACT)


with BuildPart() as f8_tool26:
    # F8_s27 → F8_t28 (new body)
    with BuildSketch(Plane.YZ.offset(-7.4990343146)):
        with Locations((-10.2497854415, 10.2497854415)):
            Rectangle(F8_S27_W, F8_S27_H)
    extrude(amount=-F8_T28_DEPTH)

    # F8_s29 → F8_t30 (revolve, cut)
    with BuildSketch(Plane(origin=(-7.4990343146, -7.4990343146, 7.4990343146), x_dir=(0, 0.7071067812, -0.7071067812), z_dir=(0, 0.7071067812, 0.7071067812))):
        with BuildLine():
            ThreePointArc((0, -5.0013656854), (5.0013656854, 0), (0, 5.0013656854))
            Line((0, 5.0013656854), (0, -5.0013656854))
        make_face()
    revolve(axis=Axis((-7.4990343146, -7.4990343146, 7.4990343146), (-1, 0, 0)), mode=Mode.SUBTRACT)


with BuildPart() as f1_4:
    add(f1_3.part)

    # F8_t25: cut F8_tool26
    add(f8_tool26.part, mode=Mode.SUBTRACT)

    # F10 (on face) → F11 (cut, through all)
    with BuildSketch(Plane(origin=(10, 10, 0), x_dir=(-0.7071067812, 0.7071067812, 0), z_dir=(0.7071067812, 0.7071067812, 0))):
        Circle(F10_R)
    extrude(amount=-F11_DEPTH, mode=Mode.SUBTRACT)

    # F13 (on face) → F14 (cut, through all)
    with BuildSketch(Plane(origin=(10, -10, 0), x_dir=(0.7071067812, 0.7071067812, 0), z_dir=(0.7071067812, -0.7071067812, 0))):
        Circle(F13_R)
    extrude(amount=-F14_DEPTH, mode=Mode.SUBTRACT)


solid = f1_4.part
